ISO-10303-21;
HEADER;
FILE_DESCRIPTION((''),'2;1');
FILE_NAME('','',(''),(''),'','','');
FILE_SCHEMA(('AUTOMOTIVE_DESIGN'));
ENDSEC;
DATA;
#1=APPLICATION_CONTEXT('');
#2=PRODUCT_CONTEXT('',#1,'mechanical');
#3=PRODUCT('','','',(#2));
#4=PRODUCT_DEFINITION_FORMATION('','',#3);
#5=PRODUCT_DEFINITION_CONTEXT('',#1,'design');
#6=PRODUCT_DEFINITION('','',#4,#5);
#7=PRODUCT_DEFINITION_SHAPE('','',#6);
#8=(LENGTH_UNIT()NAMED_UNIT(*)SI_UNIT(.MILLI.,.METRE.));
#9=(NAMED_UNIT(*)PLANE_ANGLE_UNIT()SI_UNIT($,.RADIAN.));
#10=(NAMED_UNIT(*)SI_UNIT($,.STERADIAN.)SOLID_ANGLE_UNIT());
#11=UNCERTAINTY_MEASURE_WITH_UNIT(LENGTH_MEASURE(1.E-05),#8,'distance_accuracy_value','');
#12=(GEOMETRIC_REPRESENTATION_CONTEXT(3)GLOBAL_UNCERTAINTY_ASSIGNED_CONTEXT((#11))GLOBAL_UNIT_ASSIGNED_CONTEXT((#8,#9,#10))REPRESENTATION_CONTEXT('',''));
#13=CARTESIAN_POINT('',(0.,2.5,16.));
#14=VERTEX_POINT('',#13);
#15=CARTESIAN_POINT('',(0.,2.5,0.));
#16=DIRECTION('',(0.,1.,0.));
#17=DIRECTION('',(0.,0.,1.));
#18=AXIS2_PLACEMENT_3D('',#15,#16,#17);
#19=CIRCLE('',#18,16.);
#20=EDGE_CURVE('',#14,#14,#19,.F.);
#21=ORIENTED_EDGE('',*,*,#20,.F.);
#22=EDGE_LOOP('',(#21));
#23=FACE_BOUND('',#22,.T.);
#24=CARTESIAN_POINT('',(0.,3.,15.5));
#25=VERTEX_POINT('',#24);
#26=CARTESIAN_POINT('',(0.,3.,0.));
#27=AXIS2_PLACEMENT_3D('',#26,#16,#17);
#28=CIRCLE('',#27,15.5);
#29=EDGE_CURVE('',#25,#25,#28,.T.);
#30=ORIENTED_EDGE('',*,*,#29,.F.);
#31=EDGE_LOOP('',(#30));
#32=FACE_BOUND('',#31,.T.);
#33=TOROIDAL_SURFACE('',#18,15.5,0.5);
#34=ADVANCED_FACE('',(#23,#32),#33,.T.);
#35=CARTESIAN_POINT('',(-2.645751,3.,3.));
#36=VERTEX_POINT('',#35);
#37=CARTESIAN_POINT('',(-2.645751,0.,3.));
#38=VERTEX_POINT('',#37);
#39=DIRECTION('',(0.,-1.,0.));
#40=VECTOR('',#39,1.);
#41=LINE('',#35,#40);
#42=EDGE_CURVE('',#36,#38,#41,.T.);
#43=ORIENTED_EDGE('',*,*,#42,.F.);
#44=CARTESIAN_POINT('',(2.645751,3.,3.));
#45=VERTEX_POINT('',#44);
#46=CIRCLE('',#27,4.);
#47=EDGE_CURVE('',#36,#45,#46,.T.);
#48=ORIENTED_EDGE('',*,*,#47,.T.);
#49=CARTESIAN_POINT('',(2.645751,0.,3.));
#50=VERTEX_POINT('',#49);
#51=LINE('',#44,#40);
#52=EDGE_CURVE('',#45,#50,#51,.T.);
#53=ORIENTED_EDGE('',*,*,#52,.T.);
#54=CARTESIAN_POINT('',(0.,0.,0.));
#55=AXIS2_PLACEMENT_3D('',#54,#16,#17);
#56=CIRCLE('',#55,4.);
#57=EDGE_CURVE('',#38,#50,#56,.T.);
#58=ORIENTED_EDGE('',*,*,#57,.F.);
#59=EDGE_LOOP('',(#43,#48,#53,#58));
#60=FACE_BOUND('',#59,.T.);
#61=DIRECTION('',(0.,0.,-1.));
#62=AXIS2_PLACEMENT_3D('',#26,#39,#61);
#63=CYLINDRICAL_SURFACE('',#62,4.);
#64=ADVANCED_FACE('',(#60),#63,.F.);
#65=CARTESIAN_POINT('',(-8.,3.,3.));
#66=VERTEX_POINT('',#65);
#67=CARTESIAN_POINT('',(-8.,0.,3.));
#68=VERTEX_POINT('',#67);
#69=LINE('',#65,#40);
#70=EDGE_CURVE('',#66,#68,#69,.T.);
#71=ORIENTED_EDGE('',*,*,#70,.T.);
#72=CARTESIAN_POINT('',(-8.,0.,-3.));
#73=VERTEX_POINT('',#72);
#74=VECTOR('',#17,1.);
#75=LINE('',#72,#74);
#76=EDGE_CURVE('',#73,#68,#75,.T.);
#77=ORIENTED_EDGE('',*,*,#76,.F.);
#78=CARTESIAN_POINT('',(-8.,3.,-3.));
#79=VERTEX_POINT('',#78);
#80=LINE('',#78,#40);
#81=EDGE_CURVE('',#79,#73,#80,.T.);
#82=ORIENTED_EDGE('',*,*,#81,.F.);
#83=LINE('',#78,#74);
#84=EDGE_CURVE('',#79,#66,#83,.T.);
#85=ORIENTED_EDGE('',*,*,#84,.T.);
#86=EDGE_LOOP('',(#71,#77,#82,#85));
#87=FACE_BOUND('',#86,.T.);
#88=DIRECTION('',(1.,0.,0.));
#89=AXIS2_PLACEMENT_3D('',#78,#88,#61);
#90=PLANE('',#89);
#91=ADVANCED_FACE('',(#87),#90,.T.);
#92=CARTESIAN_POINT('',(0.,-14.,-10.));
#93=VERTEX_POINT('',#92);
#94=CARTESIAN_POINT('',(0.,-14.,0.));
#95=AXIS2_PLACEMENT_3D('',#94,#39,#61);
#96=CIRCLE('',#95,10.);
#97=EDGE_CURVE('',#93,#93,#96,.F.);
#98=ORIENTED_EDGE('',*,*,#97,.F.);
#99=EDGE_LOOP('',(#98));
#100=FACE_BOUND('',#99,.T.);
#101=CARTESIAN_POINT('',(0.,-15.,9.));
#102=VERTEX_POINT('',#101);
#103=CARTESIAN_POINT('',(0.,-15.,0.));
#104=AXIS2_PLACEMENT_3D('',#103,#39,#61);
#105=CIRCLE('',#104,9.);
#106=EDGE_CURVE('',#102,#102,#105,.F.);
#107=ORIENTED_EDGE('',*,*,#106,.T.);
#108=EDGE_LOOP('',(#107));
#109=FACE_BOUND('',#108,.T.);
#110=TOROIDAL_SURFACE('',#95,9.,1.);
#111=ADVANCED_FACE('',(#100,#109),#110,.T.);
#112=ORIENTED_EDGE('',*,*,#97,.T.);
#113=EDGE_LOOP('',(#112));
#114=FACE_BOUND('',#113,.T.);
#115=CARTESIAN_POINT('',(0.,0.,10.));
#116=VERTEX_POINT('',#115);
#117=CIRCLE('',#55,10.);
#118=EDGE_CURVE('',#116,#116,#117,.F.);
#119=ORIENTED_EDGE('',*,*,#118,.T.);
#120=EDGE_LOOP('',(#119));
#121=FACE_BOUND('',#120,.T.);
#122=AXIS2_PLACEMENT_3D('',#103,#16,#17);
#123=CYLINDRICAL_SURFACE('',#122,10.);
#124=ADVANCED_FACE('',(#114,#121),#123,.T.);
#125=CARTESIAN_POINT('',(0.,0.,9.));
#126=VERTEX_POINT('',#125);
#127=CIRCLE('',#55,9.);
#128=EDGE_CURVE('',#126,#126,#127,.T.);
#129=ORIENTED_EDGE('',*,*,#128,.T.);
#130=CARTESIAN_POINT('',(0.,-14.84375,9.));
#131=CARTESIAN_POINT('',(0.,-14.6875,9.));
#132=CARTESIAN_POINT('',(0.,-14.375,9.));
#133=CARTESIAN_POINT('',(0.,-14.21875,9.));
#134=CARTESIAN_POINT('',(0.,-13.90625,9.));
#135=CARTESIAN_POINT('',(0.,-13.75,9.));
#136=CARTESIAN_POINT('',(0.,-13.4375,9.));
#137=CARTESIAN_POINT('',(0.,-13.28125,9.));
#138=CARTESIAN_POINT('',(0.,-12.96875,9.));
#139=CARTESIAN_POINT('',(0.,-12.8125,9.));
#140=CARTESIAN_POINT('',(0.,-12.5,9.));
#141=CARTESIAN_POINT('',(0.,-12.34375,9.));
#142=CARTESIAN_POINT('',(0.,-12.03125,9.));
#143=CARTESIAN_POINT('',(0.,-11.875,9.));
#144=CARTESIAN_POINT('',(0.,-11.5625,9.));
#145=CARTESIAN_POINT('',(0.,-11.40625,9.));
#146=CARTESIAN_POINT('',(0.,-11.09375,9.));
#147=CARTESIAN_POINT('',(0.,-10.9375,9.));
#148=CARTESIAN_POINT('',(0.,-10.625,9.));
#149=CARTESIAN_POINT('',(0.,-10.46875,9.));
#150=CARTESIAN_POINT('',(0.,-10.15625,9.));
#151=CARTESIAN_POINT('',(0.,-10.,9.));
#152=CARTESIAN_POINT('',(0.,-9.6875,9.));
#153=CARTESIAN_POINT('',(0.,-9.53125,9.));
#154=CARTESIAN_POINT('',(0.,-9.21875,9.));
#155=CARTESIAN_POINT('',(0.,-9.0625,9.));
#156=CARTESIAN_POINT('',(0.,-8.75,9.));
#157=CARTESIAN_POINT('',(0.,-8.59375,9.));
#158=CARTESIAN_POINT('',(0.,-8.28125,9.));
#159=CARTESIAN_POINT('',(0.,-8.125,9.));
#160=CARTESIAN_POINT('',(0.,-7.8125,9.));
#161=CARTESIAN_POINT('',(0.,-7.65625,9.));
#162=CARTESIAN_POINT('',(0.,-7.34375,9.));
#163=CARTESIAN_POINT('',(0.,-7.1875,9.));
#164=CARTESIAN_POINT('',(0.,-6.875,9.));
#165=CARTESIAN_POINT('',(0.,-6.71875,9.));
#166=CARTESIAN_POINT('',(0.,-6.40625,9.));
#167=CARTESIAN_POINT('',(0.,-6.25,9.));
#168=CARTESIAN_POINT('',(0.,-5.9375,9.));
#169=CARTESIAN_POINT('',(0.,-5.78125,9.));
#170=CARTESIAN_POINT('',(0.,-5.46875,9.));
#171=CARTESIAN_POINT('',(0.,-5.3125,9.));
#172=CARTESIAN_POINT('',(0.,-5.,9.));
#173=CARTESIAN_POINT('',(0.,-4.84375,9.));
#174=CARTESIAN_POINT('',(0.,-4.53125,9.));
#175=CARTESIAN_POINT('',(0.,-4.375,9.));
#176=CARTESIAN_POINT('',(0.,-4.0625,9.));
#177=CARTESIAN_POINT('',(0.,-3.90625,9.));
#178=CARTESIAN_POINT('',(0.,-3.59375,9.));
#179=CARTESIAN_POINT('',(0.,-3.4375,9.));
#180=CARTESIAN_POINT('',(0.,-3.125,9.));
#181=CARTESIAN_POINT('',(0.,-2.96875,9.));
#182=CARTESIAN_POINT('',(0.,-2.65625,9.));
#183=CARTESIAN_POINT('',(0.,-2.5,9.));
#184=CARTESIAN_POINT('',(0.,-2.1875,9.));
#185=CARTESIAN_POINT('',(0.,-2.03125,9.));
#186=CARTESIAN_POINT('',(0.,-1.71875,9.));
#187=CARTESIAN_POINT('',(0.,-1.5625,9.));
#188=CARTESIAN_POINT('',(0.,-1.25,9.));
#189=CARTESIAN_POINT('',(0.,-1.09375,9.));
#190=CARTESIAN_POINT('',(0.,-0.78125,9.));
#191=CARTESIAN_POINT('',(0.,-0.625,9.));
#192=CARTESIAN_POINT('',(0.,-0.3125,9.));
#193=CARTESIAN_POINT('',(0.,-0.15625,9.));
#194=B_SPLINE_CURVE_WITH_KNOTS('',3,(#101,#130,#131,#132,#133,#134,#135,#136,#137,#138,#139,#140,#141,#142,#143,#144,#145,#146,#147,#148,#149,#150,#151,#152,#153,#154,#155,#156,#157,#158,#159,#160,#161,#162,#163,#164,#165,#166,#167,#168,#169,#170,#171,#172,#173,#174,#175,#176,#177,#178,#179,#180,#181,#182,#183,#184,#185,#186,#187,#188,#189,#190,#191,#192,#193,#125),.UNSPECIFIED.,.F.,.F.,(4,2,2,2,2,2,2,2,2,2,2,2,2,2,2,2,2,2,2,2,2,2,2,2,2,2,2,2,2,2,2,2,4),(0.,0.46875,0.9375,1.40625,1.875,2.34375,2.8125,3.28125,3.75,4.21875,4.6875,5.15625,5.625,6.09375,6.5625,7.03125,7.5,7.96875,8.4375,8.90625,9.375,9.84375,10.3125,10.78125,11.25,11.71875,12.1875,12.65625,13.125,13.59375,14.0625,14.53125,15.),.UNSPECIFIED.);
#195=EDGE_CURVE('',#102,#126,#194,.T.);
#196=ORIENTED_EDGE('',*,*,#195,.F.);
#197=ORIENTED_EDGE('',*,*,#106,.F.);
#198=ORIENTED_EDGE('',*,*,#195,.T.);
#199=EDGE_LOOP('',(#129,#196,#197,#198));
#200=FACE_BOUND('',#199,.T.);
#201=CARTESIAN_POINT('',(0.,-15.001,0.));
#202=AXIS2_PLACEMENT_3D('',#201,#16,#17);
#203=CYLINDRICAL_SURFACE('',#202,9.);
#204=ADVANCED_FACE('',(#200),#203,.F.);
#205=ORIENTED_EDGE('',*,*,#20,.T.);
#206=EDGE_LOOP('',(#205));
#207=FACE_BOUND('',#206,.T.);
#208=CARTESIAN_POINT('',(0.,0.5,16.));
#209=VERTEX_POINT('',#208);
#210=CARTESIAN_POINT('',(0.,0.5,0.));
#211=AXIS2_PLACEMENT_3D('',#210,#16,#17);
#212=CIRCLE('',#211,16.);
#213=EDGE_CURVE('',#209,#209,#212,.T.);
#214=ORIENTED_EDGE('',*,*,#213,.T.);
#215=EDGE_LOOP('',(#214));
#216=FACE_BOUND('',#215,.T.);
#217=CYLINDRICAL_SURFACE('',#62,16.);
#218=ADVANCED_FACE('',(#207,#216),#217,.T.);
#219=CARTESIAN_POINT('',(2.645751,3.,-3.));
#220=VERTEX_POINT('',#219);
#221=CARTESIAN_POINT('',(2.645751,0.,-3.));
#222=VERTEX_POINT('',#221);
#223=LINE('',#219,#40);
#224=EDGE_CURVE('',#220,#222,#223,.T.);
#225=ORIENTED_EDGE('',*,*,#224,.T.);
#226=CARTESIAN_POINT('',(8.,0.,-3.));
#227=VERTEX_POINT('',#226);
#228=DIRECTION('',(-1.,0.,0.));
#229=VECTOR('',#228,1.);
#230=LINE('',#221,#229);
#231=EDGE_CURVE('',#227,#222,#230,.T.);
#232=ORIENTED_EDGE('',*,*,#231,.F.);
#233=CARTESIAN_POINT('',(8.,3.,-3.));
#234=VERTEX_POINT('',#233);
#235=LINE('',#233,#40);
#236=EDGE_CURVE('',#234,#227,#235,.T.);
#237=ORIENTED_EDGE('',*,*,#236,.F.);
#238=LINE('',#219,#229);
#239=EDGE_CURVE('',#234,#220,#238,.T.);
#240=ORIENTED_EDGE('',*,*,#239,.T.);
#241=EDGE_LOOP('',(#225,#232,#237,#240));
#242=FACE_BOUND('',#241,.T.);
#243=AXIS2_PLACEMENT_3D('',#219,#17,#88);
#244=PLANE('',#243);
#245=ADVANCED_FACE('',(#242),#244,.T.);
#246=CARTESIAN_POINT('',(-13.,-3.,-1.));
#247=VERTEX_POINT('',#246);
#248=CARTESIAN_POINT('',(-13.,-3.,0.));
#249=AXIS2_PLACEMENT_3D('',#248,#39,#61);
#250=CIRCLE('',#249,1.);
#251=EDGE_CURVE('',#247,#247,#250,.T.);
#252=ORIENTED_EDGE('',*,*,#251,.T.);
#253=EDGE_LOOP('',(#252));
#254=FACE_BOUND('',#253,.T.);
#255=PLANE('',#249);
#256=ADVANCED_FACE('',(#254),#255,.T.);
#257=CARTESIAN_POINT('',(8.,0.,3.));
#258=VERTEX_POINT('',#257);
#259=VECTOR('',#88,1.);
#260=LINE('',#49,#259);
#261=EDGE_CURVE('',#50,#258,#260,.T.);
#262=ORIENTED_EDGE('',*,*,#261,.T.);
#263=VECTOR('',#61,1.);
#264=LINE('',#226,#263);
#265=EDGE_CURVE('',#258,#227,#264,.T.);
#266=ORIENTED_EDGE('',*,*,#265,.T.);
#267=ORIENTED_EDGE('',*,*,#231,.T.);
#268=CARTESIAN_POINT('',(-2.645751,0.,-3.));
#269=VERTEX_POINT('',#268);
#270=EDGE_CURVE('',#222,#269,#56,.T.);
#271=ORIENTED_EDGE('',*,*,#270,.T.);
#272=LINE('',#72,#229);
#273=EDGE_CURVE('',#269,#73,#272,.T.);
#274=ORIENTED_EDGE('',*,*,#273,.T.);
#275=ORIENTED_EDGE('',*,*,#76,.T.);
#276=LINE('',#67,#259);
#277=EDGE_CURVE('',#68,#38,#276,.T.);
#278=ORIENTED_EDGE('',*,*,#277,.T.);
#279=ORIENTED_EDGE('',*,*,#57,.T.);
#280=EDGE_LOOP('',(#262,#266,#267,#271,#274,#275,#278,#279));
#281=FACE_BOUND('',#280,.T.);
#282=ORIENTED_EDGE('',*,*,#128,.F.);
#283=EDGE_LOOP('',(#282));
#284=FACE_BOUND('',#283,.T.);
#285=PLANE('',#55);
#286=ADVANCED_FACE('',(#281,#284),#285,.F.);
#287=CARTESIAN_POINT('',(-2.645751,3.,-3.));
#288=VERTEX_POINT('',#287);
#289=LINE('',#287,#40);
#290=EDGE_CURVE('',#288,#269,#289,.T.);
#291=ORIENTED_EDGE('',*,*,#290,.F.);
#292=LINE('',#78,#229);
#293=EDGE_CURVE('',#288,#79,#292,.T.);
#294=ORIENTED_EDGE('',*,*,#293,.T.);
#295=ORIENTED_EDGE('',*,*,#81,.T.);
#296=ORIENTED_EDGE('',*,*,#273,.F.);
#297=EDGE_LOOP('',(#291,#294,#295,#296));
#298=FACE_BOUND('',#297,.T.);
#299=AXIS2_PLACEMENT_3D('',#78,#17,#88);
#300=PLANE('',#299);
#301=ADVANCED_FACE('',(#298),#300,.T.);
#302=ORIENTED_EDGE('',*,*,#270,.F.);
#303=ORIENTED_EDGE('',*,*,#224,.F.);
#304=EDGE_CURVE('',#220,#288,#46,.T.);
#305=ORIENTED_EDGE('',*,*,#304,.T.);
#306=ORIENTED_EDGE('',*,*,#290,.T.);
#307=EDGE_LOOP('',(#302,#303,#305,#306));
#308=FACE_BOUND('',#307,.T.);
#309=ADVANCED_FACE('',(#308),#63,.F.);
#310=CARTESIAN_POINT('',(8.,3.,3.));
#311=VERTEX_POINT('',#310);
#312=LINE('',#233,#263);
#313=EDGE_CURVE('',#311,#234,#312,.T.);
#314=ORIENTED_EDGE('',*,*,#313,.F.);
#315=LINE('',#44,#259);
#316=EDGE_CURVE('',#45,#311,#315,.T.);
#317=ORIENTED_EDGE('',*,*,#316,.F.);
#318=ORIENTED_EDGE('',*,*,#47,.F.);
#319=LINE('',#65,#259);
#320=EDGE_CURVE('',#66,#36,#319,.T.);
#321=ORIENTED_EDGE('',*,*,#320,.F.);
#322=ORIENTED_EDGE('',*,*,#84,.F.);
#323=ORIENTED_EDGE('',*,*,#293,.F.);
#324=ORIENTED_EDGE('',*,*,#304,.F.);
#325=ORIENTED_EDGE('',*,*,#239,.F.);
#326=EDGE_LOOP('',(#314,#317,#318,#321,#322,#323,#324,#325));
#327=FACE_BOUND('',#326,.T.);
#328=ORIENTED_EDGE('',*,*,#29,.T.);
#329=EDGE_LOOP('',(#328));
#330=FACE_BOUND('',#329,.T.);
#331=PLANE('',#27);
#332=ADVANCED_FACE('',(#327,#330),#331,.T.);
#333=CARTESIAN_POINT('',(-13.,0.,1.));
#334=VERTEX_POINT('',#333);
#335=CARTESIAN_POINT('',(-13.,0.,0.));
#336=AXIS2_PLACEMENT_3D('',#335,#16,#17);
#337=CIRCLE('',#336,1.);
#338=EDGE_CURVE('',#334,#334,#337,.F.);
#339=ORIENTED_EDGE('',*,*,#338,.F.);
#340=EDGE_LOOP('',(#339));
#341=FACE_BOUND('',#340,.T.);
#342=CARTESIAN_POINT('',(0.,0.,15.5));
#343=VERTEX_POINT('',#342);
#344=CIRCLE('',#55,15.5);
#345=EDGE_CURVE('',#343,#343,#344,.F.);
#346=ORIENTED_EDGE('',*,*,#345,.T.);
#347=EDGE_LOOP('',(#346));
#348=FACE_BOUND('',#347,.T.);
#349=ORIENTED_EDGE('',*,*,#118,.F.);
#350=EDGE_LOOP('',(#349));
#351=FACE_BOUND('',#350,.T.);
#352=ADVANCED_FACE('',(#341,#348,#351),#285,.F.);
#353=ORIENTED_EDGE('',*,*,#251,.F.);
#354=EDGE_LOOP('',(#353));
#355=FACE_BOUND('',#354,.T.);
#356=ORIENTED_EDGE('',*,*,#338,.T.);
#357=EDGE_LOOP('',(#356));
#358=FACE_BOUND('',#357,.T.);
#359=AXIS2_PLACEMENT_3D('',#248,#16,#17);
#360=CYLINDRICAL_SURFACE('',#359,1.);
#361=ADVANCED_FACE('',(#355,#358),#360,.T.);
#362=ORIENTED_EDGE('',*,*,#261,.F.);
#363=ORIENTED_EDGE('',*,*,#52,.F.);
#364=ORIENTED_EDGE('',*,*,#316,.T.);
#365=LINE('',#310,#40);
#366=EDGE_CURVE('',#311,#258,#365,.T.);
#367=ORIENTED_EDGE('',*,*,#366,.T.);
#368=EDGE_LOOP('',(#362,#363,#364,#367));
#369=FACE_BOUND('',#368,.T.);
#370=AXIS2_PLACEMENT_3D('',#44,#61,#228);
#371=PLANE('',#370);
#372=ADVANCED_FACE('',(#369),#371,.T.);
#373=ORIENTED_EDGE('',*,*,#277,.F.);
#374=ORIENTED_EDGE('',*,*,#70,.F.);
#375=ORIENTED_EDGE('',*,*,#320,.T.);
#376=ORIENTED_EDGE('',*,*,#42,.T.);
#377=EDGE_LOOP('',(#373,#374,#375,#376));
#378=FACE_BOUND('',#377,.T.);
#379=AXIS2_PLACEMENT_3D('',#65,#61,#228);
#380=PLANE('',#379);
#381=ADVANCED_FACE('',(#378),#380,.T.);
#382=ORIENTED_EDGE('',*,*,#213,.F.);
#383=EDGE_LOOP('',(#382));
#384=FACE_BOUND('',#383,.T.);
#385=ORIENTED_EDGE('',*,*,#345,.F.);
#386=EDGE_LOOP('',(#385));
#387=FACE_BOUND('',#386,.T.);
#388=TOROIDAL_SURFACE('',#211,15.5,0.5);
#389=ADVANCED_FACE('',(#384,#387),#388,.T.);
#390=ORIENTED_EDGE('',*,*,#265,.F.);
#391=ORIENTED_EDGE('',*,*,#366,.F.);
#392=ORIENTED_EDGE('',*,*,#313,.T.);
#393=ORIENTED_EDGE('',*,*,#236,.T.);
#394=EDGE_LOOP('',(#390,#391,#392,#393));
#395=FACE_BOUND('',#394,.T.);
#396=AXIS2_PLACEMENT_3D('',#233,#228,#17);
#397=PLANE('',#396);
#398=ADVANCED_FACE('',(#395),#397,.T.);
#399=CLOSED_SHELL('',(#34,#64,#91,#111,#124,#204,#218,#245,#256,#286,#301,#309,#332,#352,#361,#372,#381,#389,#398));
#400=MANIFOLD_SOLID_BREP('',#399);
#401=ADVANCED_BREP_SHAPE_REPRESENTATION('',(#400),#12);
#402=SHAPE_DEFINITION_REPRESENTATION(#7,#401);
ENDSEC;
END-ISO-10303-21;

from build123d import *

# Parameters (mm, degrees)
SKETCH1_R           = 16
BOSS_EXTRUDE1_DEPTH = 3
SKETCH3_R           = 1
BOSS_EXTRUDE2_DEPTH = 3
SKETCH4_R           = 10
BOSS_EXTRUDE3_DEPTH = 15
CUT_EXTRUDE1_REACH  = 29.148
SKETCH5_R           = 9
FILLET1_R           = 1
FILLET2_R           = 0.5


with BuildPart() as part:
    # Sketch1 → Boss-Extrude1 (new body)
    with BuildSketch(Plane(origin=(0, 0, 0), x_dir=(1, 0, 0), z_dir=(0, 1, 0))):
        with Locations(Location((0, 0, 0), (0, 0, 270))):
            Circle(SKETCH1_R)
        with BuildLine():
            Line((2.645751311, 3), (8, 3))
            Line((8, 3), (8, -3))
            Line((8, -3), (2.645751311, -3))
            ThreePointArc((2.645751311, -3), (0, -4), (-2.645751311, -3))
            Line((-2.645751311, -3), (-8, -3))
            Line((-8, -3), (-8, 3))
            Line((-8, 3), (-2.645751311, 3))
            ThreePointArc((-2.645751311, 3), (0, 4), (2.645751311, 3))
        make_face(mode=Mode.SUBTRACT)
    extrude(amount=BOSS_EXTRUDE1_DEPTH)

    # Sketch3 → Boss-Extrude2 (add)
    with BuildSketch(Plane.XZ):
        with Locations(Location((-13, 0, 0), (0, 0, 90))):
            Circle(SKETCH3_R)
    extrude(amount=BOSS_EXTRUDE2_DEPTH)

    # Sketch4 → Boss-Extrude3 (add)
    with BuildSketch(Plane.XZ):
        with Locations(Location((0, 0, 0), (0, 0, 90))):
            Circle(SKETCH4_R)
    extrude(amount=BOSS_EXTRUDE3_DEPTH)

    # Sketch5 → Cut-Extrude1 (cut, up to next)
    with BuildSketch(Plane(origin=(0, 0, 0), x_dir=(1, 0, 0), z_dir=(0, 1, 0)), mode=Mode.PRIVATE) as cut_extrude1_sk1:
        with Locations(Location((0, 0, 0), (0, 0, 270))):
            Circle(SKETCH5_R)
    cut_extrude1_tool1 = extrude(cut_extrude1_sk1.sketch, amount=-CUT_EXTRUDE1_REACH, mode=Mode.PRIVATE) & part.part
    add(cut_extrude1_tool1.solids().sort_by_distance((0, 0, 0))[0], mode=Mode.SUBTRACT)

    # Fillet1
    fillet1_edges = [part.edges().sort_by_distance(p)[0] for p in [
        (0, -15, -10),
    ]]
    fillet(fillet1_edges, radius=FILLET1_R - 0.0001)  # a hair under: the kernel refuses the full size

    # Fillet2
    fillet2_edges = [part.edges().sort_by_distance(p)[0] for p in [
        (0, 0, -16),
        (0, 3, -16),
    ]]
    fillet(fillet2_edges, radius=FILLET2_R)


solid = part.part
